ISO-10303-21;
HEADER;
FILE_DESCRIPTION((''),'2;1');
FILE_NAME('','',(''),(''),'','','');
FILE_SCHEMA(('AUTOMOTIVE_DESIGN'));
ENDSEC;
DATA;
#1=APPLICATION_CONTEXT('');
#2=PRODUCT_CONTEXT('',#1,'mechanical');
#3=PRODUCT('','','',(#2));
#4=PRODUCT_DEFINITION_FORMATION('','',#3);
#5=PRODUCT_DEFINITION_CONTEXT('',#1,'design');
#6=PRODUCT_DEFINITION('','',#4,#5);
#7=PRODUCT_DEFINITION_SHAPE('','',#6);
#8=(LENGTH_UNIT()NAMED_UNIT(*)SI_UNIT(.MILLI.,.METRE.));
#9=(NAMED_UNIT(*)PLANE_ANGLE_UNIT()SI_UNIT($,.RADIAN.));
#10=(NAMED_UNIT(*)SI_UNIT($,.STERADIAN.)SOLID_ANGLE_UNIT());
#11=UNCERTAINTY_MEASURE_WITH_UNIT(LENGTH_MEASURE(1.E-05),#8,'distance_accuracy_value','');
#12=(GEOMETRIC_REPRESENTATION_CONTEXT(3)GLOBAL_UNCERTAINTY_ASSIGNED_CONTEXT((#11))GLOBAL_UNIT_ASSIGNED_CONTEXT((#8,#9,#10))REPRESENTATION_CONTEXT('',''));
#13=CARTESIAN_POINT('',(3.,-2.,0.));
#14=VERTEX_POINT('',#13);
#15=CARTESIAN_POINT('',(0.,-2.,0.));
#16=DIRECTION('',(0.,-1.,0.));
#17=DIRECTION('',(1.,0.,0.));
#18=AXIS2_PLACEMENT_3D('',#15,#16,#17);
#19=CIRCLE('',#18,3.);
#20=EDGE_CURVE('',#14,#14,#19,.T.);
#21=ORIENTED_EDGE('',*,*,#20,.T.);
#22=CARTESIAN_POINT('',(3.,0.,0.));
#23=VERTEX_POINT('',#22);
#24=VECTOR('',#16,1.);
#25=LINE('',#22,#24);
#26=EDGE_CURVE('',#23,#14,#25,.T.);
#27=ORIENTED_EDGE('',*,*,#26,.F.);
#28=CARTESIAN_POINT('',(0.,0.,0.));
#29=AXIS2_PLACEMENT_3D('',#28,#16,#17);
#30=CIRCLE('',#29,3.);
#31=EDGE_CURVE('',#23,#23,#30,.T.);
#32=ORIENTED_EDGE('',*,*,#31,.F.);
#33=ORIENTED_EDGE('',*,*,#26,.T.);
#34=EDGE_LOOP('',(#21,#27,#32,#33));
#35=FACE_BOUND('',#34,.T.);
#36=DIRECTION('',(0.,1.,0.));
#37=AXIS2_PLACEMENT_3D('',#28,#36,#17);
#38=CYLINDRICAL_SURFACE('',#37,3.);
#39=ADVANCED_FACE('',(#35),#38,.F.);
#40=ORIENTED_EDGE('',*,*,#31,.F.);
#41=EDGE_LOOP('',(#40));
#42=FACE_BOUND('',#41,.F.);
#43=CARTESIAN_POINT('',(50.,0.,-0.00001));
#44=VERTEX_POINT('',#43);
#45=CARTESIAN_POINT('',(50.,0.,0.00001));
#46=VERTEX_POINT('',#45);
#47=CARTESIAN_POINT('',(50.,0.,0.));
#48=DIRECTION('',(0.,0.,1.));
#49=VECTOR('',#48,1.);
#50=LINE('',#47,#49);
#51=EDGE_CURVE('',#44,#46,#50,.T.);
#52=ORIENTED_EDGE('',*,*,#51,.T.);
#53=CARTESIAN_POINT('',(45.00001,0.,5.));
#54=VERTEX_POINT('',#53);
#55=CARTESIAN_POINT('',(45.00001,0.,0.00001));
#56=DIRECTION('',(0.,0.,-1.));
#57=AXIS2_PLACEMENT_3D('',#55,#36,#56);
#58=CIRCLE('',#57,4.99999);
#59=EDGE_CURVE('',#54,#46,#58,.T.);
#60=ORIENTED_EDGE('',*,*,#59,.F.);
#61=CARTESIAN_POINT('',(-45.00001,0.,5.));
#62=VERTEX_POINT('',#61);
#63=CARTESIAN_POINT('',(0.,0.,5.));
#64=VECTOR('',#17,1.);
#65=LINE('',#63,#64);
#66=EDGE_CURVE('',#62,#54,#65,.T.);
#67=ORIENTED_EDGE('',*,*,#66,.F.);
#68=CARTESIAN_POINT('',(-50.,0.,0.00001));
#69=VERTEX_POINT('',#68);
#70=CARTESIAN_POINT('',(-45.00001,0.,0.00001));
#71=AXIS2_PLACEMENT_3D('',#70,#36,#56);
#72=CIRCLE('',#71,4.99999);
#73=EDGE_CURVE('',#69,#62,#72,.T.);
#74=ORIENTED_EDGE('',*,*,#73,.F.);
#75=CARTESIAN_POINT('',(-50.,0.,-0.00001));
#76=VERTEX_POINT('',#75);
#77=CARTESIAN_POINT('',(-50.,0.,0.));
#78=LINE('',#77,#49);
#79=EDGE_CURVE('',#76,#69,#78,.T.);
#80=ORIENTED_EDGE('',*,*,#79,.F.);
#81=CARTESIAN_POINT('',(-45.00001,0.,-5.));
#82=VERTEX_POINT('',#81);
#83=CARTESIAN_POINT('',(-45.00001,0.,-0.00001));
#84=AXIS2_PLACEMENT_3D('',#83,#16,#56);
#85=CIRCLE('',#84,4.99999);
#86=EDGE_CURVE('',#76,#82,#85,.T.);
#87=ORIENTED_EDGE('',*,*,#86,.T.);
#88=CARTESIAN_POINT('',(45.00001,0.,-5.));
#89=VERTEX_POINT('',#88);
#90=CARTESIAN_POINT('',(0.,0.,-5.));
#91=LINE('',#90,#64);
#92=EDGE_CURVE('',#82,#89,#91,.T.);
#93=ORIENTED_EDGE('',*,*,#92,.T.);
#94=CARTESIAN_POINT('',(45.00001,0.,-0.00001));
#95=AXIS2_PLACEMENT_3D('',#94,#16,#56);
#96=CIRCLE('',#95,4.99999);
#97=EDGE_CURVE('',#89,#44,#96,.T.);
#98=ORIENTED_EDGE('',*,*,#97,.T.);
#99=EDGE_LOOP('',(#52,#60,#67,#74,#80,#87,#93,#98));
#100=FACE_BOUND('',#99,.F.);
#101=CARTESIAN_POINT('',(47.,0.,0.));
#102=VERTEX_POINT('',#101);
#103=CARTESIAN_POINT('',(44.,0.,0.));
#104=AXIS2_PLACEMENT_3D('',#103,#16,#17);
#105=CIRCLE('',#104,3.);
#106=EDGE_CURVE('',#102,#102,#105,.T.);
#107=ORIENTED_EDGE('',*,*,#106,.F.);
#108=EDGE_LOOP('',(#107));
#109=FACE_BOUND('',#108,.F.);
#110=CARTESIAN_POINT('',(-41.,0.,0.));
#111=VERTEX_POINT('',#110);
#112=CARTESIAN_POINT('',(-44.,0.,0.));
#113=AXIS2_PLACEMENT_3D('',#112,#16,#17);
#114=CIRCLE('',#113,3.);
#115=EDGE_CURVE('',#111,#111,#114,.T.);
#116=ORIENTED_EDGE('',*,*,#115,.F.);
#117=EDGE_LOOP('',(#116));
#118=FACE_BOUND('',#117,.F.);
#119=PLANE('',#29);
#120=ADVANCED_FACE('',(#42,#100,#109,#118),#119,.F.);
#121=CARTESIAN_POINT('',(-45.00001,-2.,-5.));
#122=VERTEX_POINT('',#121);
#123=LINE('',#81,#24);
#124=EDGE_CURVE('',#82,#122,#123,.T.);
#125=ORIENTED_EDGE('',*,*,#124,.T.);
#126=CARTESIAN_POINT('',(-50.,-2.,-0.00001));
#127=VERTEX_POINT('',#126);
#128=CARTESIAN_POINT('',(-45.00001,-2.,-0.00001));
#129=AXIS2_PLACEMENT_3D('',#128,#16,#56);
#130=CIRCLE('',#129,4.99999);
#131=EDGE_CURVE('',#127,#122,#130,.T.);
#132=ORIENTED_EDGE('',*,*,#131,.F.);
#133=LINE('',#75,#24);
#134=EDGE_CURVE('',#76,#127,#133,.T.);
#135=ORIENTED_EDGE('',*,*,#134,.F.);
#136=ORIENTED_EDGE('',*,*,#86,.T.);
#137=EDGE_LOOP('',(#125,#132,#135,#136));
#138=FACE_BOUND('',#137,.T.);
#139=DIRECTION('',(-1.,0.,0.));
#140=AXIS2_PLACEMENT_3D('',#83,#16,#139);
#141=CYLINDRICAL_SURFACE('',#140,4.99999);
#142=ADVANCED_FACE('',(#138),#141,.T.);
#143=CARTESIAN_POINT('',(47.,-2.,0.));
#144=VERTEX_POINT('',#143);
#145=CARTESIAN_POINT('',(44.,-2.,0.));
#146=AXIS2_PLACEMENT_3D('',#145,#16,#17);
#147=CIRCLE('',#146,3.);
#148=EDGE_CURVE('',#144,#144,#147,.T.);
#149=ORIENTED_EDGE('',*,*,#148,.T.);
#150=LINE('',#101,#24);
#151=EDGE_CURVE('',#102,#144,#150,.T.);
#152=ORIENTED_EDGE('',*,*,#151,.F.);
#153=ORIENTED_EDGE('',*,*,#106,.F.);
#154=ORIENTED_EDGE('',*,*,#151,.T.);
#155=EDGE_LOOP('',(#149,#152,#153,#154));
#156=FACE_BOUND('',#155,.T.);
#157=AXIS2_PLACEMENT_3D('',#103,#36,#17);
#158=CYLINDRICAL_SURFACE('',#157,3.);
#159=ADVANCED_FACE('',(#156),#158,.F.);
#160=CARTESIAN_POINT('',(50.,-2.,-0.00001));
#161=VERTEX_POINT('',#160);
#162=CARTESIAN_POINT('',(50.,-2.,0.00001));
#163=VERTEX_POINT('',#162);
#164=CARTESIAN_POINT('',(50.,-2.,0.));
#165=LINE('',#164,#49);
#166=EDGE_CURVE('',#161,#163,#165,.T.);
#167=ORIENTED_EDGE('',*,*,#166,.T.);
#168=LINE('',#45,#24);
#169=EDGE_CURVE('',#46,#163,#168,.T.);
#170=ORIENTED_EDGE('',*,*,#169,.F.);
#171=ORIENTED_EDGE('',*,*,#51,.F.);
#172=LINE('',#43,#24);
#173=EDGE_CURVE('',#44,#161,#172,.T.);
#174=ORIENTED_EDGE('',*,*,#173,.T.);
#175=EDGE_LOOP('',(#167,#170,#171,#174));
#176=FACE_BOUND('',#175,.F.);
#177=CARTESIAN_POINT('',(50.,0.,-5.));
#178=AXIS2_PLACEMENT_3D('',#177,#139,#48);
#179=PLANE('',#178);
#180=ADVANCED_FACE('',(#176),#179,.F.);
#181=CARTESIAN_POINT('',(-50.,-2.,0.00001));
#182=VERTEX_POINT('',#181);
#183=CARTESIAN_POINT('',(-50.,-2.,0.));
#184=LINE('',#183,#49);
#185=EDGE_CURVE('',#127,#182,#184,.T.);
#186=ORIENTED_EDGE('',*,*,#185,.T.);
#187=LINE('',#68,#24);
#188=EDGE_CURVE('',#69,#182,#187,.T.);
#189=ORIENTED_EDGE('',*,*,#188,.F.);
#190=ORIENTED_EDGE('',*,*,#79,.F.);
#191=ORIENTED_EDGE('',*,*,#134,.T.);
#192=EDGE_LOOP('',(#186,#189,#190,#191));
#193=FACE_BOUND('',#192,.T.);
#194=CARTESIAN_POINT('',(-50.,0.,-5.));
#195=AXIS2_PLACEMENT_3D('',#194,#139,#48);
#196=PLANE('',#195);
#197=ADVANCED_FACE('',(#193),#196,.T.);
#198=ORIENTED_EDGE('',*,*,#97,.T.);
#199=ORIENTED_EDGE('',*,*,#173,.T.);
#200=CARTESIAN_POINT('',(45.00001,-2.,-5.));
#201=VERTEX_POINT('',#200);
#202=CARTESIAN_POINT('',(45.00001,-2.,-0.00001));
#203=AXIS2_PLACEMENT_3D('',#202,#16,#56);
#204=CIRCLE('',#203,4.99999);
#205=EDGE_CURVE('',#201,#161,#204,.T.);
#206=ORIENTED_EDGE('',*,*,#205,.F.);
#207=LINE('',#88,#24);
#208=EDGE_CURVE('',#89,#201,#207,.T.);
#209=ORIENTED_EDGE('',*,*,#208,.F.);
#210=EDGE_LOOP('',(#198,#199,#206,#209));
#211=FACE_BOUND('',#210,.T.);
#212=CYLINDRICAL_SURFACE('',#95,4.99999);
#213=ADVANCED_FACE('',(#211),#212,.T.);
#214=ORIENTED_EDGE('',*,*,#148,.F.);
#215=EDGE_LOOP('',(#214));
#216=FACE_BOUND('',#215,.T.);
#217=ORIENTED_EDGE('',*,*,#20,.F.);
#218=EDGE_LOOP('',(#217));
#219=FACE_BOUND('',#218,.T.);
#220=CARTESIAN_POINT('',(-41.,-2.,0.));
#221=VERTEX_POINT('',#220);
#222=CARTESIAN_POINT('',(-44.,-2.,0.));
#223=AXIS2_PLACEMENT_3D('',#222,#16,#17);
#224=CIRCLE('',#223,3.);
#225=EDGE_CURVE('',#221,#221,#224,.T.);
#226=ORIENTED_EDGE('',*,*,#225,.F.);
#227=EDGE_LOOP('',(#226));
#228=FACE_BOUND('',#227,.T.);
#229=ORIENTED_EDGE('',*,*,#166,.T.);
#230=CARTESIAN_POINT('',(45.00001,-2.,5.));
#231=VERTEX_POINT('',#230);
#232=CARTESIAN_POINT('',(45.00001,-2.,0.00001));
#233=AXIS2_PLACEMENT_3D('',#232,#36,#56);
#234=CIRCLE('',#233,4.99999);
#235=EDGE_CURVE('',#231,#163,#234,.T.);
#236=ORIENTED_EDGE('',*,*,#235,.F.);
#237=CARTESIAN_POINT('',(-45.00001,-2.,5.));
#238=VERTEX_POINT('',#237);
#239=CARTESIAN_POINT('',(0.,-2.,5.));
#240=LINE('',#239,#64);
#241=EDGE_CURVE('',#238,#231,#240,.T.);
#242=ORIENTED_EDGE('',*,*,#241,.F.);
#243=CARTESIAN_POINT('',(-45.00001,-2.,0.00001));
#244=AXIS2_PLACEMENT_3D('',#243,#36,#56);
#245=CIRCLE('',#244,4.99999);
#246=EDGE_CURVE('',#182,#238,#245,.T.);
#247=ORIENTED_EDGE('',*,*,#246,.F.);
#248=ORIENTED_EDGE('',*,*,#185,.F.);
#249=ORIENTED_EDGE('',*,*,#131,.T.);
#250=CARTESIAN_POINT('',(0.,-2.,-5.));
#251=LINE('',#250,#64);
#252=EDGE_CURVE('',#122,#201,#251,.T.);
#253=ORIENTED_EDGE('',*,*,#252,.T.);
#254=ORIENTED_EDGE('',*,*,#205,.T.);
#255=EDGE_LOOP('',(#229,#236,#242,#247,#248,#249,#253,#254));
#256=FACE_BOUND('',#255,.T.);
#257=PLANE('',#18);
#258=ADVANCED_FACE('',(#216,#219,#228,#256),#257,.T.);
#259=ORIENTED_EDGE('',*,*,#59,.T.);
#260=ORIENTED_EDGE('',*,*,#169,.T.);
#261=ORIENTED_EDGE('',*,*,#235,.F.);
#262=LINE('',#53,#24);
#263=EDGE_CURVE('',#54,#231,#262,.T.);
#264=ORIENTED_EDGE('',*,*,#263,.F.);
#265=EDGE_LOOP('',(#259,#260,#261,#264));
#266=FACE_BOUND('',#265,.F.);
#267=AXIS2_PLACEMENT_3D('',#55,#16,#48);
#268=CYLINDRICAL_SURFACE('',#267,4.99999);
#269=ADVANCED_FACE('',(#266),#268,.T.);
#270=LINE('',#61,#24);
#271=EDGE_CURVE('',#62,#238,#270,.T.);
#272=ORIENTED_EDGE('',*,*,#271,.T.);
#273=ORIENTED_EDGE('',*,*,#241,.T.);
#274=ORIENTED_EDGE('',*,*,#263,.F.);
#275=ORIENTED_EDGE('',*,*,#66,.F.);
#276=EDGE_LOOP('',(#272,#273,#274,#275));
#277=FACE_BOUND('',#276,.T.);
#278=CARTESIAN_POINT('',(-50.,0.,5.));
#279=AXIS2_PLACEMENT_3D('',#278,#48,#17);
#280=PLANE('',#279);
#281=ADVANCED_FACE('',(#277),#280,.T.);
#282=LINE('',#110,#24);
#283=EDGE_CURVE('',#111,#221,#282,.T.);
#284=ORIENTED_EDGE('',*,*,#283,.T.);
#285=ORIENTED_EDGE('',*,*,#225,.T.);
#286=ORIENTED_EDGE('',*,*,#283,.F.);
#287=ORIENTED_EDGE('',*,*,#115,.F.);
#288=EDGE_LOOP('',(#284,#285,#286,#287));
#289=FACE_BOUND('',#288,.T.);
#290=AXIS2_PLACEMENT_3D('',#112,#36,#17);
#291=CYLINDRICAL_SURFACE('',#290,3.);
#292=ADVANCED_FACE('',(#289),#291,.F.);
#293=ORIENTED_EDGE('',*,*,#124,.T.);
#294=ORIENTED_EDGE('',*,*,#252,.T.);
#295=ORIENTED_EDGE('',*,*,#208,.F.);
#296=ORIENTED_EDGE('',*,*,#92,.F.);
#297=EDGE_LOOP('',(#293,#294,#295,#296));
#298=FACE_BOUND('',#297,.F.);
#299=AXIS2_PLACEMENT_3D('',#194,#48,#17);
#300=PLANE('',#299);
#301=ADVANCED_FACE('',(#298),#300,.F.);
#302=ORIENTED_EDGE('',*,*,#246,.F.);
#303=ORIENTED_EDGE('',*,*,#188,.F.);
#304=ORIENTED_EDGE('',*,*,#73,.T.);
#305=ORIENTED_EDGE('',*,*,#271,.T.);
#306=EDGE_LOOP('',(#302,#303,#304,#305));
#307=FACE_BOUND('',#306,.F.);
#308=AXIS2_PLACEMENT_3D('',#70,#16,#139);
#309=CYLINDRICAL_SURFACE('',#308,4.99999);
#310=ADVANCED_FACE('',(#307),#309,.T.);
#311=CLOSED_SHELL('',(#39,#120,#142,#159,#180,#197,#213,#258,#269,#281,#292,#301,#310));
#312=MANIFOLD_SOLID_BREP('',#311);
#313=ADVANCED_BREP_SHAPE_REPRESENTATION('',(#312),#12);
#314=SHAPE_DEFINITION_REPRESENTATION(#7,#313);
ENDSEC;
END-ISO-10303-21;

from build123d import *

# Parameters (mm, degrees)
F0_W     = 100
F0_H     = 10
F0_R     = 3
F1_DEPTH = 2
F2_R     = 4.99999


# Not quite as in the source:
# - a fillet or chamfer is up to 0.001 mm smaller than in the source, because OpenCascade refuses the exact size


with BuildPart() as f1:
    # F0 (on Front) → F1 (new body)
    with BuildSketch(Plane.XZ):
        Rectangle(F0_W, F0_H)
        with Locations((-44, 0)):
            Circle(F0_R, mode=Mode.SUBTRACT)
        Circle(F0_R, mode=Mode.SUBTRACT)
        with Locations((44, 0)):
            Circle(F0_R, mode=Mode.SUBTRACT)
    extrude(amount=F1_DEPTH)

    # F2 (radius 5 in the source; OpenCascade refuses exactly that, so slightly less here)
    f2_edges = [f1.edges().sort_by_distance(p)[0] for p in [
        (-50, -1, 5),
        (-50, -1, -5),
        (50, -1, 5),
        (50, -1, -5),
    ]]
    fillet(f2_edges, radius=F2_R)


solid = f1.part
